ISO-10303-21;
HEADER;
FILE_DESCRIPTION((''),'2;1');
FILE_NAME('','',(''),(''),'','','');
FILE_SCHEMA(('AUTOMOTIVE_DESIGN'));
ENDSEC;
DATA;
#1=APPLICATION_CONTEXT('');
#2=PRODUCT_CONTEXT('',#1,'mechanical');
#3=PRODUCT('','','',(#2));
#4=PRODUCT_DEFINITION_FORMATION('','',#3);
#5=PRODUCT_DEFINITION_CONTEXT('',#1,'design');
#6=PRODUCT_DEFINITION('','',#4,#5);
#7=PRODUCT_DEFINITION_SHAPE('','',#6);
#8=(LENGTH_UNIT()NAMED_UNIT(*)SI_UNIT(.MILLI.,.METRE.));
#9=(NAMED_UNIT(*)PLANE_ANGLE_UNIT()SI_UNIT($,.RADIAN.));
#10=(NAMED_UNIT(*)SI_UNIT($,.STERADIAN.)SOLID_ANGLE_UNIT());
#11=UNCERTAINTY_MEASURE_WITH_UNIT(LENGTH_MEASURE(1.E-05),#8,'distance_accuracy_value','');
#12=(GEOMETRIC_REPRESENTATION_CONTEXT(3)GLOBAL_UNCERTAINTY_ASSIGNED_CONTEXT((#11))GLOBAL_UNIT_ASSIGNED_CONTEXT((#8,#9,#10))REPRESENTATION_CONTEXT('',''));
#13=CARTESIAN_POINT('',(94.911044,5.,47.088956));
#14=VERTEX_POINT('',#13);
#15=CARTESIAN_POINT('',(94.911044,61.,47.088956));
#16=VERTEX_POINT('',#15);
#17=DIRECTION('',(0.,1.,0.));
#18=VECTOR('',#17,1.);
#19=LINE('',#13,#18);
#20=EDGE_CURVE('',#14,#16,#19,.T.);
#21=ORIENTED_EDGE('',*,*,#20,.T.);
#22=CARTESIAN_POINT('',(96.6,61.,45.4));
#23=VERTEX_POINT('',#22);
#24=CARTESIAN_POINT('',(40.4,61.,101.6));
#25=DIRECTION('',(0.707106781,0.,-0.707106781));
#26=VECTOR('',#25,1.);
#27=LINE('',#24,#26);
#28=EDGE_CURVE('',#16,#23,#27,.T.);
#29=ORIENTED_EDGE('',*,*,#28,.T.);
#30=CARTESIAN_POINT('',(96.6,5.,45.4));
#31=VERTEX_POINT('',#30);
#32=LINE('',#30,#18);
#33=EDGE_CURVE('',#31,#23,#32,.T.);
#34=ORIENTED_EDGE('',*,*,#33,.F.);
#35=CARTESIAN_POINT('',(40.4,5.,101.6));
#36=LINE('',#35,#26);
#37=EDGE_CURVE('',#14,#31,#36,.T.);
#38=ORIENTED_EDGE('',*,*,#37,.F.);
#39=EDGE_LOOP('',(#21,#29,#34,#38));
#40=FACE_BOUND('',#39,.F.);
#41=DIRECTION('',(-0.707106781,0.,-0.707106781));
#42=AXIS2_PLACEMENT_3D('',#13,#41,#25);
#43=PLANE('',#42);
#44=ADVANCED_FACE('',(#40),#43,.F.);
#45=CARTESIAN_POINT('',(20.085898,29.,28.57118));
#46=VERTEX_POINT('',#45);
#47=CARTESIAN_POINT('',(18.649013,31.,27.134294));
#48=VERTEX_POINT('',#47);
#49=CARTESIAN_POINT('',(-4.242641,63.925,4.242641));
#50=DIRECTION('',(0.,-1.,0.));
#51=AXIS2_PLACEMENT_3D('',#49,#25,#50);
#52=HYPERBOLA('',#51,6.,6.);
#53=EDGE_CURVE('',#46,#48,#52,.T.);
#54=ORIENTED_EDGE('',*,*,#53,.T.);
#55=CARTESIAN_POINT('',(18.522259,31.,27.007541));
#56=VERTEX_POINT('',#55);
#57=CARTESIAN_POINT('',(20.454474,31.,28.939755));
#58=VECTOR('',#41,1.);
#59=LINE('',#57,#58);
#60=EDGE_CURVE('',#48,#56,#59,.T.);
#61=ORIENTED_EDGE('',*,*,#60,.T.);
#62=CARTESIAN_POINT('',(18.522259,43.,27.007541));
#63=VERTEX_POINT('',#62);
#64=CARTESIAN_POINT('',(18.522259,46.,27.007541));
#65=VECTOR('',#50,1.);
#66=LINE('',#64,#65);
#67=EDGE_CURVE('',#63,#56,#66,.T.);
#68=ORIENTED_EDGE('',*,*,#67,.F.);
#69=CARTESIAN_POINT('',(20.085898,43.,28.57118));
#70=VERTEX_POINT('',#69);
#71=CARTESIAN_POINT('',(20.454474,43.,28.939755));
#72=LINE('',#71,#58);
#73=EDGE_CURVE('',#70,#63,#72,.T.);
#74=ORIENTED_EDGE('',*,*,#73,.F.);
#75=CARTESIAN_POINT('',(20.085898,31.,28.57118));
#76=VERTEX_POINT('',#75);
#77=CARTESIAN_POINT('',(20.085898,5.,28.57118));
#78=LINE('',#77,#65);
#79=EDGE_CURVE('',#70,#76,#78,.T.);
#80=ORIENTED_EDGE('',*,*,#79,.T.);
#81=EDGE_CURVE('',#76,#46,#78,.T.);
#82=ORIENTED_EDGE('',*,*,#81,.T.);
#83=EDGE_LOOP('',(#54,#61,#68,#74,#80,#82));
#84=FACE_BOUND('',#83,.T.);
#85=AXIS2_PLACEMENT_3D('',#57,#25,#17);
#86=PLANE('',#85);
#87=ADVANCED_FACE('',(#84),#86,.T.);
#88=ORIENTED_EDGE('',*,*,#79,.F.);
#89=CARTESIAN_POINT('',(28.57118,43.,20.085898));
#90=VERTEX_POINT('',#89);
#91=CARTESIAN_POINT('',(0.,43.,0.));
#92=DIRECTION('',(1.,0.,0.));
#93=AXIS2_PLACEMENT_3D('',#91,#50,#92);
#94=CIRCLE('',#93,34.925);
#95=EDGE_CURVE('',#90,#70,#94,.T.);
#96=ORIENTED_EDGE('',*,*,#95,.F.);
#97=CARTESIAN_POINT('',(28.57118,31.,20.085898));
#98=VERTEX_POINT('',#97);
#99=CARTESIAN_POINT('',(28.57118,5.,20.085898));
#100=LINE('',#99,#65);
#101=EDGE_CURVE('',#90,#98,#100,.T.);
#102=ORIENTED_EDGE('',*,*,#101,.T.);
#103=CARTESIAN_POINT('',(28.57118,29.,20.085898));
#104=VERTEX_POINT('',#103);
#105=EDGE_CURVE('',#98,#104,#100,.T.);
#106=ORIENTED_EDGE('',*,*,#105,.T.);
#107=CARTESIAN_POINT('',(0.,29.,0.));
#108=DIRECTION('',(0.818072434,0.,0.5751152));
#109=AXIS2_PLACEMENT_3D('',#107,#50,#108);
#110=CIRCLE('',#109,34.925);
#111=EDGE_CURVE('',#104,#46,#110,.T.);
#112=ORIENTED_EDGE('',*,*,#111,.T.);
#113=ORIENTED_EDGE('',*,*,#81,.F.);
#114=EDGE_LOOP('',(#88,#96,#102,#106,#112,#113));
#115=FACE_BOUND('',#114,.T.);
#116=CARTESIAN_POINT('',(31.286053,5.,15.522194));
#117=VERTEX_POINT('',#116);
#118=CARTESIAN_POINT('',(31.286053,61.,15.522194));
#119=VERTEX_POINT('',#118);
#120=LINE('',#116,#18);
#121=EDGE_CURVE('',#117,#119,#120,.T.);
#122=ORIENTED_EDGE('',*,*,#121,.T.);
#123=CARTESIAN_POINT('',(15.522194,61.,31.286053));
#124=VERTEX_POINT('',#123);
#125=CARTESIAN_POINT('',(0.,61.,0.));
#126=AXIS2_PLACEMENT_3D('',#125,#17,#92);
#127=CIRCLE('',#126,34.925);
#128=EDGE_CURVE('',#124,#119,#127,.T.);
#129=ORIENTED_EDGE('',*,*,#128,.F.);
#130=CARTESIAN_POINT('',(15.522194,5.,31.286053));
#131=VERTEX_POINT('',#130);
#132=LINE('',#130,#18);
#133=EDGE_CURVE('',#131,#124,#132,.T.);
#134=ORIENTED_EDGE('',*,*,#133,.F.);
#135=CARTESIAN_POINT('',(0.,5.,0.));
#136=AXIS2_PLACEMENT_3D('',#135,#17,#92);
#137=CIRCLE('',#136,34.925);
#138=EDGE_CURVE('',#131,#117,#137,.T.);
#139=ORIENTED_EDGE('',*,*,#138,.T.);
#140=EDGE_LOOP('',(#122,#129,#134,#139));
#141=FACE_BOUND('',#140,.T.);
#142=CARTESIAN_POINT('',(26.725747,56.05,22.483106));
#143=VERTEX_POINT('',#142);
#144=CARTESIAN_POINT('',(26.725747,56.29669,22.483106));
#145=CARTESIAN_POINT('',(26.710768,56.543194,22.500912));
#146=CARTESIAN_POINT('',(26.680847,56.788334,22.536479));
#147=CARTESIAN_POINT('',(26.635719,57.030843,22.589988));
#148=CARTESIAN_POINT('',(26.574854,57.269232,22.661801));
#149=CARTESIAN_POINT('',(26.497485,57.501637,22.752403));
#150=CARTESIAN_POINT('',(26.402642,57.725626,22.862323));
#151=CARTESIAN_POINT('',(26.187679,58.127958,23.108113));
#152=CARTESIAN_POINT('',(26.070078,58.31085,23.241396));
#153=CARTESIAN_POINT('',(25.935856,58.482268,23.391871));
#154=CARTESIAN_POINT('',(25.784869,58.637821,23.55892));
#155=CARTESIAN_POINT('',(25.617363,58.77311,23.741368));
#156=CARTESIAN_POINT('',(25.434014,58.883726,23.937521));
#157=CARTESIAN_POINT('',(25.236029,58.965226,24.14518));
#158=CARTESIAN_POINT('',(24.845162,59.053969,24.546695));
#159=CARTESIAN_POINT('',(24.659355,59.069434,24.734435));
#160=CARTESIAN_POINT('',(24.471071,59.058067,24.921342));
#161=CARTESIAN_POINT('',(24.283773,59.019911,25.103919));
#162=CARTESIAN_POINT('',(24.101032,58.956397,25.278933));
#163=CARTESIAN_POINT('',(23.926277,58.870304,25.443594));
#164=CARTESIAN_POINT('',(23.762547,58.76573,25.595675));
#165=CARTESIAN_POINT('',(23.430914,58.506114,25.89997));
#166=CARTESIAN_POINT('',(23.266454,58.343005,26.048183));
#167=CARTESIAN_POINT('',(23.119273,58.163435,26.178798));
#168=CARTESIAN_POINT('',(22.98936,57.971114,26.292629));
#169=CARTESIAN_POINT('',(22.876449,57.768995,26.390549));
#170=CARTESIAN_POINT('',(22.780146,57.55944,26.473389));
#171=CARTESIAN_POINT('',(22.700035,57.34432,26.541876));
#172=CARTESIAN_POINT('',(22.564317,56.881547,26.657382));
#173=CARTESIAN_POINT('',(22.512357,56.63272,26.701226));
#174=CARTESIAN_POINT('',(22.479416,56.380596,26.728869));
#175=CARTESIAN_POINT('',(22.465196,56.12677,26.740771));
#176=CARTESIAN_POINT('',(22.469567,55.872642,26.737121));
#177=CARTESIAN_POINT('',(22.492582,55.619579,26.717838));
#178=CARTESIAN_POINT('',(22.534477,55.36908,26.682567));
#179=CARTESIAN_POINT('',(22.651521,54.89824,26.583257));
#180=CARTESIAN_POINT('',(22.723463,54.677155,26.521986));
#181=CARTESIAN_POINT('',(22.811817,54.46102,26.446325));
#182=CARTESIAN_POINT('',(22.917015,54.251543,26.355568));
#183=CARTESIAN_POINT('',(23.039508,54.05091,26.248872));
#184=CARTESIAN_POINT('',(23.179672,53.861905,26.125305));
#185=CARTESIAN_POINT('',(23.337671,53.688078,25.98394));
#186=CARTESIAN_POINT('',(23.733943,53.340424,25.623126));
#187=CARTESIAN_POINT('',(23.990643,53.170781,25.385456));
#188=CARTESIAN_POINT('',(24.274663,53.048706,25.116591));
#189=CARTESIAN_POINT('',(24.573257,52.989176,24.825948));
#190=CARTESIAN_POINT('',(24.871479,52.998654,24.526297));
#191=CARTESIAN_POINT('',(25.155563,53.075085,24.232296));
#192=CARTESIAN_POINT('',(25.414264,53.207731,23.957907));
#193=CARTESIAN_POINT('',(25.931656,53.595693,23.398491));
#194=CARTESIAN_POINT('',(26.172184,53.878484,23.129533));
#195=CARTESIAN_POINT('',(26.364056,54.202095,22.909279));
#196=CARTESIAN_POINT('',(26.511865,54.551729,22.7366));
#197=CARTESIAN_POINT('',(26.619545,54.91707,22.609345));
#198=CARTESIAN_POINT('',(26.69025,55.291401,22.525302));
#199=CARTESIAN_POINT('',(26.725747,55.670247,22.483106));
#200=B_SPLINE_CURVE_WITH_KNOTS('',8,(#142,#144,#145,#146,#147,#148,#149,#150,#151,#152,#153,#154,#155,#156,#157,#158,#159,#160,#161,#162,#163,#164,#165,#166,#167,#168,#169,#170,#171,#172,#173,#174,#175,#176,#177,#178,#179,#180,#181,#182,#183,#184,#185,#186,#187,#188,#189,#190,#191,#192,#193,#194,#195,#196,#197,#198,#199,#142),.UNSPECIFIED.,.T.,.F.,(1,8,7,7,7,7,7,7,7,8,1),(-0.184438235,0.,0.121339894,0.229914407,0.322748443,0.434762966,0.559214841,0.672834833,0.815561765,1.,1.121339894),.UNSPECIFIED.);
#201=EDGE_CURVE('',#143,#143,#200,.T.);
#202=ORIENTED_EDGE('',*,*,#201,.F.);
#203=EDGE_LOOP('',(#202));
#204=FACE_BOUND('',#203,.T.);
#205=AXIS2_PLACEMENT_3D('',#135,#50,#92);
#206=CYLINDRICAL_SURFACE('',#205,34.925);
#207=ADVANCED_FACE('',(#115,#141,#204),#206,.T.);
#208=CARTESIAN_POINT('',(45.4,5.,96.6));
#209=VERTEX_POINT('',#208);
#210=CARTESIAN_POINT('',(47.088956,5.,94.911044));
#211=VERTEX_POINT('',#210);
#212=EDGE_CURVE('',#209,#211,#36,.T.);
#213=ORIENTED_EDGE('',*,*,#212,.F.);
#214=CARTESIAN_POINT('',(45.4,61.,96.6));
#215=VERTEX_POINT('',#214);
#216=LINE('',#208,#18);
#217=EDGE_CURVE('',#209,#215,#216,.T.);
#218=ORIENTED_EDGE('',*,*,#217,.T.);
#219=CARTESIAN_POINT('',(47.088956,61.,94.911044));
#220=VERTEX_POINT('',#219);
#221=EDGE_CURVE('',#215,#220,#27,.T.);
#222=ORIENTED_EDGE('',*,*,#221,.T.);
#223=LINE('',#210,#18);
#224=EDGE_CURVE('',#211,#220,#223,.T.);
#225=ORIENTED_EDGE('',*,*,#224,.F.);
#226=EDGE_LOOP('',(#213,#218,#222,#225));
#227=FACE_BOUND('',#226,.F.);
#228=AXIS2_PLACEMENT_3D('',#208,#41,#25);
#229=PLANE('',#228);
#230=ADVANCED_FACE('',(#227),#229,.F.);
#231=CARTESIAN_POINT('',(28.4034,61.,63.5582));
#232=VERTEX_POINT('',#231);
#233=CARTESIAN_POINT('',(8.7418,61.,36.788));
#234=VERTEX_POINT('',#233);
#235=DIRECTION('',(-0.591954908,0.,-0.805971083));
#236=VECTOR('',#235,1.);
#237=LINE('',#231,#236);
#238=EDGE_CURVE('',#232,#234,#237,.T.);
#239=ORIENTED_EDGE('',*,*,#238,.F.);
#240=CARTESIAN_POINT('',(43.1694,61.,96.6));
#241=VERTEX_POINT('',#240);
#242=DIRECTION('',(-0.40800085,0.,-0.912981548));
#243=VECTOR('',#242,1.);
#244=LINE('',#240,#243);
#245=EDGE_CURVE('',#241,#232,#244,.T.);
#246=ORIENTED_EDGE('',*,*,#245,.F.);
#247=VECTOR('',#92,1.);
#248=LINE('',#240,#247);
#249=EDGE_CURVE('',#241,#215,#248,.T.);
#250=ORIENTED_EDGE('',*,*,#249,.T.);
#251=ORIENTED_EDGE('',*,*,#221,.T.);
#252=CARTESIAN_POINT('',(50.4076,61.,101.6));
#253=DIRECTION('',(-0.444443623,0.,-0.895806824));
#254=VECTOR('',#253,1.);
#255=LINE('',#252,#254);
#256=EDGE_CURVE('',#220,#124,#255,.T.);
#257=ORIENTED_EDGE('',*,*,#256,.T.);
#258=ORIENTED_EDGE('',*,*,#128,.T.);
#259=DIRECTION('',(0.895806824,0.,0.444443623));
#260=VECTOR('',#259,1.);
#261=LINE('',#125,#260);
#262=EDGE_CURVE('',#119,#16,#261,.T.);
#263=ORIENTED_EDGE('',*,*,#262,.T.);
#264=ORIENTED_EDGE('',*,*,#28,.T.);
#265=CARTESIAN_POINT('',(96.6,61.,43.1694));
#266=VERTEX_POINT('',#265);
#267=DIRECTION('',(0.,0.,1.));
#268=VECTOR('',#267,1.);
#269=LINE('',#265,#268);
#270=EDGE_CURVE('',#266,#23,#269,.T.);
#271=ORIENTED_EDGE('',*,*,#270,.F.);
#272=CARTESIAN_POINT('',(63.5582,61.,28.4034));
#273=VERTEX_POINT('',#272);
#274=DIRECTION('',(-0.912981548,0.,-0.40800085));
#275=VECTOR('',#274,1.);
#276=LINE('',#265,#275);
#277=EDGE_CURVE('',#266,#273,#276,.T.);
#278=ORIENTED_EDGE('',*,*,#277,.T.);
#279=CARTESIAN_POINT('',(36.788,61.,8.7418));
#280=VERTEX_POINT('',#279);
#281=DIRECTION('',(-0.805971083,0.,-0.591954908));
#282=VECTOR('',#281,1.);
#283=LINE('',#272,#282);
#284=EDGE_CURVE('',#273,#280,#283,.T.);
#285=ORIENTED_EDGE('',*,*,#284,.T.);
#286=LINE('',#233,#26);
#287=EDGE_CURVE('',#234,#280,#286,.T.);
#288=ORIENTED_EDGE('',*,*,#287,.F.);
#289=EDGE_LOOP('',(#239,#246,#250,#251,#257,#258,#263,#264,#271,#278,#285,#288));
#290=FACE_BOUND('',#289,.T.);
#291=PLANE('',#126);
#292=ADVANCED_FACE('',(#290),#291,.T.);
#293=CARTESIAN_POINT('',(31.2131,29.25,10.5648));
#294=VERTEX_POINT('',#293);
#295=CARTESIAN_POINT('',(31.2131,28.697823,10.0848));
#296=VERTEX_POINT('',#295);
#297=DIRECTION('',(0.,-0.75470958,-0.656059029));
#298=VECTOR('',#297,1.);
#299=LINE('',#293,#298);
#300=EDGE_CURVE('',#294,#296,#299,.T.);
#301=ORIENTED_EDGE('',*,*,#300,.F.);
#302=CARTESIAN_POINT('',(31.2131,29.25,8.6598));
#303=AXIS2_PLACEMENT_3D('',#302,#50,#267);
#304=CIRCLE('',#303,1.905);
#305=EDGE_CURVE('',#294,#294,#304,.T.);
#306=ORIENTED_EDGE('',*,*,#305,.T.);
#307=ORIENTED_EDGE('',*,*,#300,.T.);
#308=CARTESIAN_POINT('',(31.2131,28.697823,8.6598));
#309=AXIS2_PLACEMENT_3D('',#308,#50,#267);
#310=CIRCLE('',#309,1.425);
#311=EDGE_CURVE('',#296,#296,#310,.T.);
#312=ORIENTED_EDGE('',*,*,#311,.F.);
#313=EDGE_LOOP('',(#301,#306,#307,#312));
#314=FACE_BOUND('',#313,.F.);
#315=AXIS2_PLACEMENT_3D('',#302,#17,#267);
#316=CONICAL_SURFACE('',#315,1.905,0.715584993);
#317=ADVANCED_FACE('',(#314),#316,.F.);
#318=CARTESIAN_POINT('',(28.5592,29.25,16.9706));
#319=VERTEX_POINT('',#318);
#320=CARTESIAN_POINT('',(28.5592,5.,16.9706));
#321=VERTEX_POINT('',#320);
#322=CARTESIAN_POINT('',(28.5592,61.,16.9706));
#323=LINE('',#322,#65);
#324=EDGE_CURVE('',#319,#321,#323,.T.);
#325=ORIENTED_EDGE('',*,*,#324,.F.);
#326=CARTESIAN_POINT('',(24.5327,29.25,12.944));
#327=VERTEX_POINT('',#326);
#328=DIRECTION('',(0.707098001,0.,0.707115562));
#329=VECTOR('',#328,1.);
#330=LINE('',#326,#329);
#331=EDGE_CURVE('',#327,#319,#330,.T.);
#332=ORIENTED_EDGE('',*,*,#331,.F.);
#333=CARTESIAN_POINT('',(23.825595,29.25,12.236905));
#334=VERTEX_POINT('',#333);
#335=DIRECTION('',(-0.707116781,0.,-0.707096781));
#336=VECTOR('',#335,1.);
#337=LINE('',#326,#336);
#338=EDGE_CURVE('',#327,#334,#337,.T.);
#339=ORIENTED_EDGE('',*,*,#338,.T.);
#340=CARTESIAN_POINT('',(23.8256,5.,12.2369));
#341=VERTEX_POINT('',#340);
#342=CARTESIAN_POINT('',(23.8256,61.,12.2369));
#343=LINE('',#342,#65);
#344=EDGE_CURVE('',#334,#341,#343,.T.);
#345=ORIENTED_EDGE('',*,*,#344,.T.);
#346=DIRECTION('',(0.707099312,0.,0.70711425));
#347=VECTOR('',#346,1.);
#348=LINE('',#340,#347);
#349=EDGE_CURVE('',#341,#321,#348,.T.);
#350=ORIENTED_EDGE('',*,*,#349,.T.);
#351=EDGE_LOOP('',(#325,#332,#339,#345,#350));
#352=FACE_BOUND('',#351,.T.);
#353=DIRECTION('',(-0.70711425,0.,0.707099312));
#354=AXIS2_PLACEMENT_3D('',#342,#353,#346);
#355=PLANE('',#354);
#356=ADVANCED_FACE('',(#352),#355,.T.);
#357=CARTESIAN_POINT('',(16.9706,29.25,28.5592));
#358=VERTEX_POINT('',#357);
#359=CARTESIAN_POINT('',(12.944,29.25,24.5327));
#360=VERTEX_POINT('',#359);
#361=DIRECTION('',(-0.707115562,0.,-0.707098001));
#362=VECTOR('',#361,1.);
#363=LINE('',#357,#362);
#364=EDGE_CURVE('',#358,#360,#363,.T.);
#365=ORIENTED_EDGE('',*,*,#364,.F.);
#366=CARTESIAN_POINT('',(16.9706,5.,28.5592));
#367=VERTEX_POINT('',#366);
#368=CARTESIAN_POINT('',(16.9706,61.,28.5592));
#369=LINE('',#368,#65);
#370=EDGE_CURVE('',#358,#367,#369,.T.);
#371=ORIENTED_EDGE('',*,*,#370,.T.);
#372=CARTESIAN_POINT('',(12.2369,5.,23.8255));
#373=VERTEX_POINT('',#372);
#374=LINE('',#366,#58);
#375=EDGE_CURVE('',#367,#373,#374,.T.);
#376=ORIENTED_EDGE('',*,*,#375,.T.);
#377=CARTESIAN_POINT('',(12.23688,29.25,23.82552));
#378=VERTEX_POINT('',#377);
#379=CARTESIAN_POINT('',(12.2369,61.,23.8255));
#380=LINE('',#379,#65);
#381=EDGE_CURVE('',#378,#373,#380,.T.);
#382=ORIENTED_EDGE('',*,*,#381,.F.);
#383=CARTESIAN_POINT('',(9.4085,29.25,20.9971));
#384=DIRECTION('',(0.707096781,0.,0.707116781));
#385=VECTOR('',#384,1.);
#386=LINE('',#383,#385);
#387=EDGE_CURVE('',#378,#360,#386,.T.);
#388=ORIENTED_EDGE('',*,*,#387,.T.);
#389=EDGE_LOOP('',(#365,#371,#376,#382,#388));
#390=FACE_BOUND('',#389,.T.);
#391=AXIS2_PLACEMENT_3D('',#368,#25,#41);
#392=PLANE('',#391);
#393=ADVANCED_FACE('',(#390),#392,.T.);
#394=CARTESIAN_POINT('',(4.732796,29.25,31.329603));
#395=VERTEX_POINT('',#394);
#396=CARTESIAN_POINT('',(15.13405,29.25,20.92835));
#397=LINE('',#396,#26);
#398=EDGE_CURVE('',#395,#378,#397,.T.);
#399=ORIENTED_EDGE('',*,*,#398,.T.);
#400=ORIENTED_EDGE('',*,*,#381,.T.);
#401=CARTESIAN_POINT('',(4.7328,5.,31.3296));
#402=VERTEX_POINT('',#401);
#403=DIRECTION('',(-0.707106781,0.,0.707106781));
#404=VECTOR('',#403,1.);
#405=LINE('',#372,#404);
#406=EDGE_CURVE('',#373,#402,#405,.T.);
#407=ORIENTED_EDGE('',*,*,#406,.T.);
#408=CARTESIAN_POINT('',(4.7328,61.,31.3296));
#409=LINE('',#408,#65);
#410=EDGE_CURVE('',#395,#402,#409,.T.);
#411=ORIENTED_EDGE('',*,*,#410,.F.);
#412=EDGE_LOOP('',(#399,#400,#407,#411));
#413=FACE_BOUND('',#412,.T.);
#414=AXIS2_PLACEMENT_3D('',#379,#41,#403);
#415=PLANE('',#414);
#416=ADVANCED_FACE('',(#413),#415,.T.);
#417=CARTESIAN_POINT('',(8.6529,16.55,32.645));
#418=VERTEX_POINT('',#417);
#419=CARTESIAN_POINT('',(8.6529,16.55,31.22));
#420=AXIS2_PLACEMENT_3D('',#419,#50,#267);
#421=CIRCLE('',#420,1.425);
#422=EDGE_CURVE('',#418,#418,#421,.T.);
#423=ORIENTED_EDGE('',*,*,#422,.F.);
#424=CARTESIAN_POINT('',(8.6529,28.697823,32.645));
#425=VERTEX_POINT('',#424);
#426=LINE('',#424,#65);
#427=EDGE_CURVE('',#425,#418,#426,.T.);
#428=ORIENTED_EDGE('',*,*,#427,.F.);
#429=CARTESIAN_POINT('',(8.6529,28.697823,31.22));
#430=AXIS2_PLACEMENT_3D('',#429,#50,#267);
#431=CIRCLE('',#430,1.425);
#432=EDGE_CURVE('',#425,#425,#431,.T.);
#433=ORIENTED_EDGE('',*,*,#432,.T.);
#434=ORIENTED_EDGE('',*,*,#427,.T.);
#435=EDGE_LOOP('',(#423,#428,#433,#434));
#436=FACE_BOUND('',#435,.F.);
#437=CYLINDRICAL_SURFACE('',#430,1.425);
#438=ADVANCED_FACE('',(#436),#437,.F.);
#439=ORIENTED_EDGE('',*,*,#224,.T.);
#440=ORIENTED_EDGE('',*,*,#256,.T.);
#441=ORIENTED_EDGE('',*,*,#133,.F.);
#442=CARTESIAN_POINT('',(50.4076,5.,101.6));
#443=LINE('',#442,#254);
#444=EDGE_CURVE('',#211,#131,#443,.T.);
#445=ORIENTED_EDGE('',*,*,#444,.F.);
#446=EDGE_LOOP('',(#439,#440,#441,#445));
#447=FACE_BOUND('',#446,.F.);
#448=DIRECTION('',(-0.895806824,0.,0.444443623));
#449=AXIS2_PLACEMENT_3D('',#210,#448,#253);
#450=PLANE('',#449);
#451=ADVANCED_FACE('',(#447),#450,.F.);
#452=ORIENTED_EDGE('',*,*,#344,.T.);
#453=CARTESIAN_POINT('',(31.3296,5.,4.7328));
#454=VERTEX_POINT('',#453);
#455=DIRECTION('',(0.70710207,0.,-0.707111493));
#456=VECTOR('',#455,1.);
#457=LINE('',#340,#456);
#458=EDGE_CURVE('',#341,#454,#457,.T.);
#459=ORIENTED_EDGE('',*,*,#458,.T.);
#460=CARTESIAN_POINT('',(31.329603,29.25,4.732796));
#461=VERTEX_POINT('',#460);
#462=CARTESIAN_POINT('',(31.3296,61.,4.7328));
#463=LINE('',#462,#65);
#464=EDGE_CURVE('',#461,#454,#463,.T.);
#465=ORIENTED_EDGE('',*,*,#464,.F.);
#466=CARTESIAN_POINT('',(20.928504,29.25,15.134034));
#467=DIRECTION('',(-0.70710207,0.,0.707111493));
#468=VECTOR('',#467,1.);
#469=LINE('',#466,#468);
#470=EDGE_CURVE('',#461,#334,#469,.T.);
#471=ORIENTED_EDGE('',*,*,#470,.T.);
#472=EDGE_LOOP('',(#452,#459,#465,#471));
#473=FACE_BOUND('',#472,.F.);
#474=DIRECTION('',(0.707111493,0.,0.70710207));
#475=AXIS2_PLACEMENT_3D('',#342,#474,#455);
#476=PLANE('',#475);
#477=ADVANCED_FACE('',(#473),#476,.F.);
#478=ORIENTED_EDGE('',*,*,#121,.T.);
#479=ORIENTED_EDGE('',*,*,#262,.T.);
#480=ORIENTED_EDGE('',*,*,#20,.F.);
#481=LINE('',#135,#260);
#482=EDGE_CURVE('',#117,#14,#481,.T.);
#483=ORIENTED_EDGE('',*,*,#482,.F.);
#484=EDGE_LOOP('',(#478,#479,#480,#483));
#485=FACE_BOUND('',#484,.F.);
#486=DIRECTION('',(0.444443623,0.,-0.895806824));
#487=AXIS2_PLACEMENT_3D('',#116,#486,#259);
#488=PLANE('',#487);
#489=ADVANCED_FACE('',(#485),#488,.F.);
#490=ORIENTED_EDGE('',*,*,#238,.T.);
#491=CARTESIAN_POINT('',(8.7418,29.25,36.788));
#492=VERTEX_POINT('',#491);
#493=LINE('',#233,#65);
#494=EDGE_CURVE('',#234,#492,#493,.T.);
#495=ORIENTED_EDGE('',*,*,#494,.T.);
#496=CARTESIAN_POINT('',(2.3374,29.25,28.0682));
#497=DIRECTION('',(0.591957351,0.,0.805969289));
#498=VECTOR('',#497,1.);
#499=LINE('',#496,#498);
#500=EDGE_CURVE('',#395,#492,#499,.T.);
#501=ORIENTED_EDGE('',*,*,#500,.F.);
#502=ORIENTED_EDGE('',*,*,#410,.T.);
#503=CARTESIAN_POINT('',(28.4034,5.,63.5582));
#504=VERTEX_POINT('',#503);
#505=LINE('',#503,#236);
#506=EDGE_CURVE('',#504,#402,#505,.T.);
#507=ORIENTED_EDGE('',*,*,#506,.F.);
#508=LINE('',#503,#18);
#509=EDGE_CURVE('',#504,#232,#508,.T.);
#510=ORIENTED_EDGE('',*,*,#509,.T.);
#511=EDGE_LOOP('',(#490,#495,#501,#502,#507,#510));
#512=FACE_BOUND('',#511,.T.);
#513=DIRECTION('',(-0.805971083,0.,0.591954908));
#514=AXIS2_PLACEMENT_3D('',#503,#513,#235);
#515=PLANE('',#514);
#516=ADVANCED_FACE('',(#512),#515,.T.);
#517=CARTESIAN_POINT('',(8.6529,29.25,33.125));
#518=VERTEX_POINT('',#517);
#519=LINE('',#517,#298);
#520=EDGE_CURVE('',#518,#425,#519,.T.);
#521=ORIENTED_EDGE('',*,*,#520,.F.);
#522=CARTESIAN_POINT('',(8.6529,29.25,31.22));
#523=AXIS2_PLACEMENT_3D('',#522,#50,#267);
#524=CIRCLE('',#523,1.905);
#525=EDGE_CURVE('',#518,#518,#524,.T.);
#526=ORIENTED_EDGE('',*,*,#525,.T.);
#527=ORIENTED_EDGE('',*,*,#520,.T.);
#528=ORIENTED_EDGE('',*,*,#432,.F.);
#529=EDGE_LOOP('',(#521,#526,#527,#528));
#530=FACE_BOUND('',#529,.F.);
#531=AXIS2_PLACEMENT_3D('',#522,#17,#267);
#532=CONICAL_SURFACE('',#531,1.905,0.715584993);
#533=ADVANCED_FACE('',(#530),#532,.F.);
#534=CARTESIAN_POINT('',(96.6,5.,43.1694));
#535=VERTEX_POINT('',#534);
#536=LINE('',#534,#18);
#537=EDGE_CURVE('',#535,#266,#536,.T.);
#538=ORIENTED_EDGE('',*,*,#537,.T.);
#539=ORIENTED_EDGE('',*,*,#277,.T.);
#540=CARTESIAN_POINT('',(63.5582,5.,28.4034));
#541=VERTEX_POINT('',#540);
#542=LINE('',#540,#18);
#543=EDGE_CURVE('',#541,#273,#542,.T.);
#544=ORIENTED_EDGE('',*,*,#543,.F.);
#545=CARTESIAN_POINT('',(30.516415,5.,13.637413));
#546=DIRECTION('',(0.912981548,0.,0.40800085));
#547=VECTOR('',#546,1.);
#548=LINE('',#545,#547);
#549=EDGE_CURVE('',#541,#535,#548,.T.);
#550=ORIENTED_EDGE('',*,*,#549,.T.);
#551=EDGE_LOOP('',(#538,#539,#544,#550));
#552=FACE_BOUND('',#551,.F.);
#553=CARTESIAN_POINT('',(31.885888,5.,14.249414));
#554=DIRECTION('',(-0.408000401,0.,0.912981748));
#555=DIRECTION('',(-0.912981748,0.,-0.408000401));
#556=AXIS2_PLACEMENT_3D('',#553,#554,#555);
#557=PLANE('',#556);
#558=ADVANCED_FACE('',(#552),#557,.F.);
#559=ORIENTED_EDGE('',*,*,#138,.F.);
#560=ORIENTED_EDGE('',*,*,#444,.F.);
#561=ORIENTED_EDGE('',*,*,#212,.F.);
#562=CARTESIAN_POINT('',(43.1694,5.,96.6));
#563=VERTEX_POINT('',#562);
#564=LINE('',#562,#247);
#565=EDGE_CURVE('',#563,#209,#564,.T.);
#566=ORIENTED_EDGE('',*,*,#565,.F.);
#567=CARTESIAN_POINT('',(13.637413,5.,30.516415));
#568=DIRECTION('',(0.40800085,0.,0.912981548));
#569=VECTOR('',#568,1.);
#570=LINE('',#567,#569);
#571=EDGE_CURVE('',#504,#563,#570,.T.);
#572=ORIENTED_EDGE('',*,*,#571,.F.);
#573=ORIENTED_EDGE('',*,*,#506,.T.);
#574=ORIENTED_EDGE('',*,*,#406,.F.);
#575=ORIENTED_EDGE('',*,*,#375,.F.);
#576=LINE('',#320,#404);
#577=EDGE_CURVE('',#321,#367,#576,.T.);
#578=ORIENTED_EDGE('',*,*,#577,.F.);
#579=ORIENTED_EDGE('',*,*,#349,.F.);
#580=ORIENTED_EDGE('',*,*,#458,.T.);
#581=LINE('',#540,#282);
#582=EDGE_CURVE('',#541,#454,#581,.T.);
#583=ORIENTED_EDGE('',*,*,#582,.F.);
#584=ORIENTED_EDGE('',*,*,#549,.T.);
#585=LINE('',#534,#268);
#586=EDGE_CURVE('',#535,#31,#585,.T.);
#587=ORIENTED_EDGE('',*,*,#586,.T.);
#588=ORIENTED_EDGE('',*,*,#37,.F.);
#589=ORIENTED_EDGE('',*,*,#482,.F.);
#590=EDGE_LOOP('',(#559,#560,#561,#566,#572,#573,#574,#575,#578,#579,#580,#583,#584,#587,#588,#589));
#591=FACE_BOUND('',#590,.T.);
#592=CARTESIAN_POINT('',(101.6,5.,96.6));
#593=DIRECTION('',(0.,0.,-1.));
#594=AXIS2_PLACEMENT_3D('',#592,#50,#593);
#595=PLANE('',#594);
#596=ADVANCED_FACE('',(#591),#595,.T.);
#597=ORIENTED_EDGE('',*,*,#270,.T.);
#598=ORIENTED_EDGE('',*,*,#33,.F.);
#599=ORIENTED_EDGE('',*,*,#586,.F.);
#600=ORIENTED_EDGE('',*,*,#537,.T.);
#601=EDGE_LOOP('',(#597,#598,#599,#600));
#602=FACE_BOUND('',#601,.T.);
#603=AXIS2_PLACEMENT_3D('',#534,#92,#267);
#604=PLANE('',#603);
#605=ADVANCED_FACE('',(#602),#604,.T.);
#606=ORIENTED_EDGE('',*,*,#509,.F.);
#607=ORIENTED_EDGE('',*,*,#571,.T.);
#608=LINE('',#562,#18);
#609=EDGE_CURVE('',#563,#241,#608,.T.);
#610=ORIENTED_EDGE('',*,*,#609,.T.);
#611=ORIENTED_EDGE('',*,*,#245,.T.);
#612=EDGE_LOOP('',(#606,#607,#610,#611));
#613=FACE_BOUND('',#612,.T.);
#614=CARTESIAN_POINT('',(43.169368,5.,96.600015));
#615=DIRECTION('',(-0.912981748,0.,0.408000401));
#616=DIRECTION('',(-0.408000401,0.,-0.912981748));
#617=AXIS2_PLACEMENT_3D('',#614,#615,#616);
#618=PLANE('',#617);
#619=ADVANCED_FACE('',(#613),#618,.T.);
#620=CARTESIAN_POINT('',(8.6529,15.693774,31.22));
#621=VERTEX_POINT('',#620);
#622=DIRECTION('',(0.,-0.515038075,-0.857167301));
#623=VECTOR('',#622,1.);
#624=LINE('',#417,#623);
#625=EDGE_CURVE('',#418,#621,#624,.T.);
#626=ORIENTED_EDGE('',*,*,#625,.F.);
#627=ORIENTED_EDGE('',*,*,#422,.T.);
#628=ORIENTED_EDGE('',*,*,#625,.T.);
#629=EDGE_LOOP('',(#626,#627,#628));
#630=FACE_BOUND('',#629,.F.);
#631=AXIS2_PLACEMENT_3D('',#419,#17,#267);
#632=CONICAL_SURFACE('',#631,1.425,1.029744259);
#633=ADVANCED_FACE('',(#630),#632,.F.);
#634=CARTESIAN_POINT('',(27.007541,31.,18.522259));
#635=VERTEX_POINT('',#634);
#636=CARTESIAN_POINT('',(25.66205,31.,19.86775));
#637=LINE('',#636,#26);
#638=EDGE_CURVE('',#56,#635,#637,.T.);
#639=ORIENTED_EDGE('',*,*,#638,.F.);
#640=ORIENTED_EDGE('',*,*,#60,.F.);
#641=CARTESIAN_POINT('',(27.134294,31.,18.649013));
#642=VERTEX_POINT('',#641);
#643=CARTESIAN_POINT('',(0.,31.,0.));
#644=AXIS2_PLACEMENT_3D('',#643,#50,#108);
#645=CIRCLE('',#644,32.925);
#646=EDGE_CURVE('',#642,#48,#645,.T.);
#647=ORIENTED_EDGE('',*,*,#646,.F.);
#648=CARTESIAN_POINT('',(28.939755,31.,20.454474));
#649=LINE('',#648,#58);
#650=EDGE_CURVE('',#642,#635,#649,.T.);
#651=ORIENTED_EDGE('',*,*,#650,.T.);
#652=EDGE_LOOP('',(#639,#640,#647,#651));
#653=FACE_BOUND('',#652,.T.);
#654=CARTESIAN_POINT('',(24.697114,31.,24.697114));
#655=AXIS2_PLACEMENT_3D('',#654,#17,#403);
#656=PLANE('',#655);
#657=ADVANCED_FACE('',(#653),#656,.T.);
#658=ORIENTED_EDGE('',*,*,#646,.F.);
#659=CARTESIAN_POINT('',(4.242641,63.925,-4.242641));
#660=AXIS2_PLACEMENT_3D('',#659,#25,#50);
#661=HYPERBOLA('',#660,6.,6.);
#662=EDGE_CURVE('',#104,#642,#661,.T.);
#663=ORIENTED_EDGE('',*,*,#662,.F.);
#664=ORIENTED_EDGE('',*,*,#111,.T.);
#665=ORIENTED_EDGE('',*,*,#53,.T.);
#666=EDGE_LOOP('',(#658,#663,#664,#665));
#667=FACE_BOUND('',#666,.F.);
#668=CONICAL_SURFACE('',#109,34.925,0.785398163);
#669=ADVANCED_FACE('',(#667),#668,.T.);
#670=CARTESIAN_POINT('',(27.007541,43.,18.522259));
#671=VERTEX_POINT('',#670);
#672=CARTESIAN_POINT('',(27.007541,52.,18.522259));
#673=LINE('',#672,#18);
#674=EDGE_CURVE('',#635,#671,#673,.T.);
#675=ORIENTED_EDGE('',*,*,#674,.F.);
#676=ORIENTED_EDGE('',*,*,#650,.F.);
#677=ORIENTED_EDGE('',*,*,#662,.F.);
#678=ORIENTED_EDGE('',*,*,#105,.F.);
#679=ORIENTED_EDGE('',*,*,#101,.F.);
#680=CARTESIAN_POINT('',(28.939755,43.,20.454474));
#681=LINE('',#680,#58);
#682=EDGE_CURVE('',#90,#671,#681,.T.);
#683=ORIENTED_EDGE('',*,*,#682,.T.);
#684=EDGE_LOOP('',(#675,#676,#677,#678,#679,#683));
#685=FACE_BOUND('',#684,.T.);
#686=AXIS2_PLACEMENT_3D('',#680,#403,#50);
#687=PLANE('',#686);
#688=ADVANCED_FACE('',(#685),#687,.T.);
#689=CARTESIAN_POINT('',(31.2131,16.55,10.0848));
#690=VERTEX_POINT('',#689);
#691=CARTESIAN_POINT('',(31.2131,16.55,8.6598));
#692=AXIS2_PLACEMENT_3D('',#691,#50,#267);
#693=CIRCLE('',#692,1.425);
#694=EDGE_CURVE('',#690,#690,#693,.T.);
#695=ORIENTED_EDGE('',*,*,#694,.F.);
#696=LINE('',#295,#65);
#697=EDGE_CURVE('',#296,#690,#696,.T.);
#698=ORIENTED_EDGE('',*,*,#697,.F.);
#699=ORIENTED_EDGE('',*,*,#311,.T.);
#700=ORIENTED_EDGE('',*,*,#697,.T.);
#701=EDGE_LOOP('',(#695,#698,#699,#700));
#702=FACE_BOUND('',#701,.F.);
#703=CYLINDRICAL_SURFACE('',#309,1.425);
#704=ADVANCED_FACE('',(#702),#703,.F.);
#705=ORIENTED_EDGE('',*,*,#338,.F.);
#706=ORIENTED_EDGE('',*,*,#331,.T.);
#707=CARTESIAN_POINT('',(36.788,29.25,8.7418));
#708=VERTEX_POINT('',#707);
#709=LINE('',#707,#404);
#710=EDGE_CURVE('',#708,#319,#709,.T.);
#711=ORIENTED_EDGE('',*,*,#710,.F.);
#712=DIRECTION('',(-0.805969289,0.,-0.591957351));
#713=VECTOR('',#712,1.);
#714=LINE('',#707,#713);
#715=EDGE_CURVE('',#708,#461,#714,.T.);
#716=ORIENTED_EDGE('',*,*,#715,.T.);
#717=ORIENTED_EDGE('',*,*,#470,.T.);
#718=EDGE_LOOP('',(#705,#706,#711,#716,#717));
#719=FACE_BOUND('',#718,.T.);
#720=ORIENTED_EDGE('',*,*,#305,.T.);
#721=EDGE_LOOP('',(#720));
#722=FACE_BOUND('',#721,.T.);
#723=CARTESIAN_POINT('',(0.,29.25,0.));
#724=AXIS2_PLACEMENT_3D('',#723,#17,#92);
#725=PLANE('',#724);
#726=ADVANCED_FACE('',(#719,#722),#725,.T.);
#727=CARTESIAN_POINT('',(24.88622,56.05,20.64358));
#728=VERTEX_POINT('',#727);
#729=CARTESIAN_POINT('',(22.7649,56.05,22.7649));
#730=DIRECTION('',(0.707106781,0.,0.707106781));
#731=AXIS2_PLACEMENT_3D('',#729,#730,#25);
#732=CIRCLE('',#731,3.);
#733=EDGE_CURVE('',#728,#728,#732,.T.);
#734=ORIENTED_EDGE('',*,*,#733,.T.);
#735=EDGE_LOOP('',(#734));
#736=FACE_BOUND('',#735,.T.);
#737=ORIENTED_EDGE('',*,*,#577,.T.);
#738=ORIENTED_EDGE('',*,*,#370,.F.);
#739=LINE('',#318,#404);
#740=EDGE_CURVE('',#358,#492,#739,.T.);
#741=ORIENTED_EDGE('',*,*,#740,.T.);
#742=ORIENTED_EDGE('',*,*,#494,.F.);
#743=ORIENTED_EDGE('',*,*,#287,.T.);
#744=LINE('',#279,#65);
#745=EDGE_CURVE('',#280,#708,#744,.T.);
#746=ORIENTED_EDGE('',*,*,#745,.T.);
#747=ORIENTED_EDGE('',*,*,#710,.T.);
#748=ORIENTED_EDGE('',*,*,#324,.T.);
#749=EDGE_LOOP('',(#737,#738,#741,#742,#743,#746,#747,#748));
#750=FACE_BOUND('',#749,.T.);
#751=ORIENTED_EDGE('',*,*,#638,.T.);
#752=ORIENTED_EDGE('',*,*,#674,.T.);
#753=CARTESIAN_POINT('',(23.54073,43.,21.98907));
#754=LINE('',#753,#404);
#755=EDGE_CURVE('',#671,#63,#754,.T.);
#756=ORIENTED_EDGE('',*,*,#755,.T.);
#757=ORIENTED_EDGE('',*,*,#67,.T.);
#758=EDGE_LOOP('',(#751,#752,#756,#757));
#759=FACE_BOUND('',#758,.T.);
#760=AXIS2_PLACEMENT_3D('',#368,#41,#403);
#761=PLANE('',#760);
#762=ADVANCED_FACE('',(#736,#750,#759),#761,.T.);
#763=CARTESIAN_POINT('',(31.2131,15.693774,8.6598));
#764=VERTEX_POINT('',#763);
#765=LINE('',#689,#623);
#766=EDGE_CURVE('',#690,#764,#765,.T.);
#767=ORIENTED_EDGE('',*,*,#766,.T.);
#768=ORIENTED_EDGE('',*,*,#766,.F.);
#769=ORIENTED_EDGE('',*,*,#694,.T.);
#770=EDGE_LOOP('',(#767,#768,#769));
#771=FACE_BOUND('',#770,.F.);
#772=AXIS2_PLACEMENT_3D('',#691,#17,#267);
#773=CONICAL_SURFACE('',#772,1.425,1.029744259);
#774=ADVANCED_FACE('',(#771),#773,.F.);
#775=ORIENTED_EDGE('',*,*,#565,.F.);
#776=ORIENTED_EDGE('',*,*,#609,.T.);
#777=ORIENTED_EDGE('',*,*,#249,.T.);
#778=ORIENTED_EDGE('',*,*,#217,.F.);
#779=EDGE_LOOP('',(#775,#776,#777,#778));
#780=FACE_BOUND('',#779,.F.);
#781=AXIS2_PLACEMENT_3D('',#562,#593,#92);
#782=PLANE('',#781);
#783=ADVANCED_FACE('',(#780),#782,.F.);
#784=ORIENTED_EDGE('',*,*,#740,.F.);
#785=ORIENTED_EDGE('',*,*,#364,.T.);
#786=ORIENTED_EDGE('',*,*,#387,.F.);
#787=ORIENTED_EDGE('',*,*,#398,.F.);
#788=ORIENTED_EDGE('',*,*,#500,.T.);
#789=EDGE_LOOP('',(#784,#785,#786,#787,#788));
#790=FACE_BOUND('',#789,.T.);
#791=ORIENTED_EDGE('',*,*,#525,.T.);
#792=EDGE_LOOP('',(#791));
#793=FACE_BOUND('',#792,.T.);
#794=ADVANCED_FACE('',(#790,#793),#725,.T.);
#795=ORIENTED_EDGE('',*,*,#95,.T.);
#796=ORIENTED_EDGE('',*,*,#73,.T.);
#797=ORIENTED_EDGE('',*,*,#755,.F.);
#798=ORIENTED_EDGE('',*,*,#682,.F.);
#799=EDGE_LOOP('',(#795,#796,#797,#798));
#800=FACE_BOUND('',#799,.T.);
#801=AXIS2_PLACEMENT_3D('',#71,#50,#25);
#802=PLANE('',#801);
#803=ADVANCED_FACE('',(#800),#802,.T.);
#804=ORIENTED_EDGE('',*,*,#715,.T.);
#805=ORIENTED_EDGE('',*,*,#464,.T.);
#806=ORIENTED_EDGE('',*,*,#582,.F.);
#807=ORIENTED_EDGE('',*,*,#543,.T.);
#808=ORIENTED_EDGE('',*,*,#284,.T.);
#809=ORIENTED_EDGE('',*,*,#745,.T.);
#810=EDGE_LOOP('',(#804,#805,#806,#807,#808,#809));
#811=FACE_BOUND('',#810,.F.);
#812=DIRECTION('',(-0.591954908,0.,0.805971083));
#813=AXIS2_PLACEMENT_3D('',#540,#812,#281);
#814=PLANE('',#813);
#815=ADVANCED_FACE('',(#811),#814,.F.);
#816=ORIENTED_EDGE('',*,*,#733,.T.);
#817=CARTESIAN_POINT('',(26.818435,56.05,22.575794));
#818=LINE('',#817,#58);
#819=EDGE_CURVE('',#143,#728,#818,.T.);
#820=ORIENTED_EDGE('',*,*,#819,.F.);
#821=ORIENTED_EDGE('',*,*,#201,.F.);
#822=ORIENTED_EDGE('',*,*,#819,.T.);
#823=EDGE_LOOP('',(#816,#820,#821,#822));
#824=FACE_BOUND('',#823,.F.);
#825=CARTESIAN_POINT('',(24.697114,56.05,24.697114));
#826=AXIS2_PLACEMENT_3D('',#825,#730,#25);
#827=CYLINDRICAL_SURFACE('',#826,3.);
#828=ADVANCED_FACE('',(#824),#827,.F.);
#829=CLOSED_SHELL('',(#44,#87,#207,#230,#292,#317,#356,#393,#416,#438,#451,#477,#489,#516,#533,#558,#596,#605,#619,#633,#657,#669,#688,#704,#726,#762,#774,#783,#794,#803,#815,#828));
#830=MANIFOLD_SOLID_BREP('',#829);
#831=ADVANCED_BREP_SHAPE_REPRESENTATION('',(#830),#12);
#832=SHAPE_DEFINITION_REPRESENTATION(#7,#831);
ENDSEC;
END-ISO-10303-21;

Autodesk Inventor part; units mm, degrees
ref_plane "YZ Plane" through (0, 0, 0) normal (1, 0, 0) x (0, 1, 0)
ref_plane "XZ Plane" through (0, 0, 0) normal (0, 1, 0) x (-1, 0, 0)
sketch "Sketch1" plane through (0, 0, 0) normal (0, 1, 0) x (-1, 0, 0)
  line L0 (101.6, -101.6) -> (-101.6, -101.6)
  line L1 (-101.6, -101.6) -> (-101.6, 101.6)
  line L2 (-101.6, 101.6) -> (101.6, 101.6)
  line L3 (101.6, 101.6) -> (101.6, -101.6)
  line L4 (96.6, -96.6) -> (-96.6, -96.6)
  line L5 (-96.6, -96.6) -> (-96.6, 96.6)
  line L6 (-96.6, 96.6) -> (96.6, 96.6)
  line L7 (96.6, 96.6) -> (96.6, -96.6)
  line L8 (101.6, 101.6) -> (-40.4, 101.6)
  circle A0 centre (0, 0) radius 88.9
  circle A1 centre (0, 0) radius 109.3376
  line L9 (-40.4, 101.6) -> (-101.6, 40.4)
  line L10 (-45.4, 101.6) -> (-101.6, 45.4)
  line L11 (96.6, 96.6) -> (96.6, 101.6)
  line L12 (-45.4, 101.6) -> (-35.4, 101.6)
  line L13 (-35.4, 101.6) -> (-35.4, 96.6)
  line L14 (-35.4, 96.6) -> (-45.4, 96.6)
  line L15 (-45.4, 96.6) -> (-45.4, 101.6)
  line L16 (-45.4, 101.6) -> (-43.114, 101.6)
  line L17 (-43.114, 101.6) -> (-43.114, 96.6)
  line L18 (-43.114, 96.6) -> (-45.4, 96.6)
  line L19 (-45.4, 96.6) -> (-45.4, 101.6)
  line L20 (-96.6, 45.4) -> (-101.6, 45.4)
  line L21 (-101.6, 45.4) -> (-101.6, 43.114)
  line L22 (-101.6, 43.114) -> (-96.6, 43.114)
  line L23 (-96.6, 43.114) -> (-96.6, 45.4)
  point P0 (96.6, 51.2168)
  point P1 (101.6, 40.4)
  point P2 (101.6, -40.4)
  point P3 (96.6, -51.2168)
  point P4 (-96.6, 45.4)
  point P5 (-45.4, 96.6)
  dimension "d0" = 203.2
  dimension "d1" = 203.2
  dimension "d2" = 101.6
  dimension "d3" = 101.6
  dimension "d4" = 5
  dimension "d5" = 5
  dimension "d6" = 5
  dimension "d7" = 5
  dimension "d10" = 142
  dimension "d12" = 61.2
  dimension "d14" = 177.8
  dimension "d15" = 5
  dimension "d16" = 5
  dimension "d17" = 10
  dimension "d86" = 2.286
  dimension "d87" = 2.286
extrude "Extrusion1" add sketch "Sketch1" along normal blind 5 contours L0 A1 L4 L7 L3 | L0 A1 L4 | A1 L7 L3 | L0 L1 A1 L5 L4 | A1 L7 L4 | L4 A1 L5 L9 L6 L7 | A1 L7 L11 L2 L3 | L4 L5 A1 | A1 L6 L7 | L1 L9 L22 L5 A1 | L11 L6 A1 L2 | L6 L13 L2 A1 | L1 L22 A1 | A1 L22 L9 | L22 L9 L5 | L6 L17 L9 L2 L13 | L1 L20 A1 L22 | A1 L20 L9 L22 | L20 A1 L10 L5 | L5 L10 L6 L9 | A1 L17 L2 | L9 L17 A1 | L6 L9 L17 | L1 L2 L10 A1 L6 L5 | L10 A1 L20 | L10 A1 L5 | L5 A1 L6 L10 | L15 A1 L17 L9 | L6 L10 A1 L15 | L17 A1 L15 L2 | L5 L6 A1 | L6 A1 L10 | A1 L10 L15 | A0
sketch "Sketch3" plane through (0, 5, 0) normal (0, 1, 0) x (1, 0, 0)
  circle A0 centre (0, 0) radius 88.9
  line L0 (-101.6, 101.6) -> (-101.6, -101.6) projected
  line L1 (-101.6, -101.6) -> (101.6, -101.6) projected
  line L2 (-101.6, 101.6) -> (101.6, 101.6)
  line L3 (101.6, 101.6) -> (101.6, -101.6)
  line L4 (101.6, -101.6) -> (-101.6, -101.6)
  line L5 (-101.6, -101.6) -> (-101.6, 101.6)
  line L6 (-96.6, 96.6) -> (96.6, 96.6)
  line L7 (96.6, 96.6) -> (96.6, -96.6)
  line L8 (96.6, -96.6) -> (-96.6, -96.6)
  line L9 (-96.6, -96.6) -> (-96.6, 96.6)
  line L10 (-101.6, -101.6) -> (40.4, -101.6)
  circle A1 centre (0, 0) radius 109.3376
  line L11 (40.4, -101.6) -> (101.6, -40.4)
  line L12 (101.6, -101.6) -> (101.6, 101.6) projected
  line L13 (45.4038, -101.6) -> (101.6, -45.4038)
  line L14 (96.6, -45.4) -> (101.6, -45.4038)
  line L15 (45.4, -96.6) -> (45.4038, -101.6)
  line L16 (96.6, -45.4) -> (101.6, -45.4)
  line L17 (101.6, -45.4) -> (101.6, -43.114)
  line L18 (101.6, -43.114) -> (96.6, -43.114)
  line L19 (96.6, -43.114) -> (96.6, -45.4)
  line L20 (45.4038, -101.6) -> (43.1178, -101.6)
  line L21 (43.1178, -101.6) -> (43.1178, -96.6)
  line L22 (43.1178, -96.6) -> (45.4038, -96.6)
  line L23 (45.4038, -96.6) -> (45.4038, -101.6)
  point P0 (45.4038, -101.6)
  point P1 (50.4038, -96.6)
  point P2 (96.6, -50.4038)
  dimension "d28" = 177.8
  dimension "d29" = 5
  dimension "d30" = 5
  dimension "d31" = 5
  dimension "d32" = 5
  dimension "d33" = 142
  dimension "d76" = 5.0038
  dimension "d77" = 5.0038
  dimension "d88" = 2.286
  dimension "d89" = 2.286
extrude "Extrusion3" cut sketch "Sketch3" against normal blind 2 contours L2 A1 L6 L9 L0 | A1 L9 L0 | L2 A1 L6 | A1 L9 L8 L1 L0 | L2 L3 A1 L7 L6 | A1 L8 L21 L11 L1 | L3 L11 L18 L7 A1 | A1 L21 L1 | L11 L21 A1 | L3 L18 A1 | A1 L18 L11
sketch "Sketch4" plane through (0, 5, 0) normal (0, 1, 0) x (1, 0, 0)
  line L0 (101.6, 101.6) -> (-101.6, 101.6)
  line L1 (-101.6, 101.6) -> (-101.6, -101.6)
  line L2 (-101.6, -101.6) -> (101.6, -101.6)
  line L3 (101.6, -101.6) -> (101.6, 101.6)
  circle A0 centre (0, 0) radius 2.5
  line L4 (11.3314, 2.139) -> (-2.139, -11.3314)
  line L5 (0, 0) -> (-5.6569, 5.6569)
  line L6 (-5.6569, -14.8492) -> (-26.163, 5.6569)
  line L7 (-5.6569, 26.163) -> (14.8492, 5.6569)
  circle A1 centre (-5.6569, 5.6569) radius 14
  line L8 (-26.163, 5.6569) -> (-5.6569, 26.163)
  line L9 (14.8492, 5.6569) -> (-5.6569, -14.8492)
  line L10 (-40.3051, 5.6569) -> (-5.6569, 40.3051)
  line L11 (-5.6569, 40.3051) -> (28.9914, 5.6569)
  line L12 (28.9914, 5.6569) -> (-5.6569, -28.9914)
  line L13 (-5.6569, -28.9914) -> (-40.3051, 5.6569)
  line L14 (-22.6451, 9.1747) -> (-9.1747, 22.6451)
  line L15 (-9.1747, 22.6451) -> (-12.7668, 26.2372)
  line L16 (-12.7668, 26.2372) -> (-26.2372, 12.7668)
  line L17 (-26.2372, 12.7668) -> (-22.6451, 9.1747)
  point P0 (9.525, 22.5)
  point P1 (-9.525, -6.5)
  dimension "d37" = 203.2
  dimension "d38" = 203.2
  dimension "d39" = 8
  dimension "d40" = 28
  dimension "d41" = 29
  dimension "d42" = 29
  dimension "d43" = 14.5
  dimension "d44" = 10
  dimension "d45" = 10
  dimension "d46" = 10
  dimension "d47" = 10
  dimension "d48" = 5.08
  dimension "d49" = 9.525
  dimension "d50" = 9.525
  dimension "d55" = 101.6
  dimension "d56" = 101.6
extrude "Extrusion4" cut sketch "Sketch4" against normal blind 1 contours A0 | L4 L9 L6 L8 L7 | L8 L17 L16 L15 | A1 | L10 L11 L12 L13
sketch "Sketch6" plane through (0, 5, 0) normal (0, 1, 0) x (1, 0, 0)
  line L0 (45.4038, -101.6) -> (0, 0)
  line L1 (50.4038, -96.6) -> (45.4038, -101.6) projected
  line L2 (96.6, -43.114) -> (96.6, 96.6) projected
  line L3 (101.6, -101.6) -> (101.6, 101.6) projected
  circle A0 centre (0, 0) radius 34.925
  circle A1 centre (0, 0) radius 33.425
  line L4 (-101.6, 101.6) -> (-101.6, -101.6) projected
  line L5 (-101.6, -101.6) -> (40.4, -101.6)
  line L6 (-101.6, -101.6) -> (101.6, -101.6) projected
  line L7 (101.6, 101.6) -> (101.6, -43.114) projected
  line L8 (101.6, -45.4038) -> (0, 0)
  line L9 (-96.6, -96.6) -> (43.1178, -96.6) projected
  line L10 (96.6, -43.114) -> (96.6, 96.6) projected
  line L11 (43.1178, -101.6) -> (-101.6, -101.6) projected
  line L12 (101.6, -45.4038) -> (96.6, -50.4038) projected
  line L13 (45.4038, -101.6) -> (101.6, -45.4038)
  line L14 (43.1178, -101.6) -> (101.6, -101.6) projected
  line L15 (0, 0) -> (101.6, -50.4076)
  line L16 (50.4076, -101.6) -> (0, 0)
  line L17 (43.1694, -96.6) -> (47.9269, -96.6)
  line L18 (96.6, -43.1694) -> (96.6, -47.9269)
  line L19 (40.4, -101.6) -> (101.6, -40.4)
  point P0 (13.6374, -30.5164)
  point P1 (30.5164, -13.6374)
  point P2 (14.2494, -31.8859)
  point P3 (31.2861, -15.5222)
  point P4 (29.9423, -14.8555)
  point P5 (31.8859, -14.2494)
  point P6 (98.2555, -48.7483)
  point P7 (96.6, -47.9269)
  point P8 (47.9269, -96.6)
  point P9 (15.5222, -31.2861)
  point P10 (96.6, -45.4)
  point P11 (45.4, -96.6)
  point P12 (14.8555, -29.9423)
  point P13 (96.6, -45.4)
  point P14 (45.4, -96.6)
  point P15 (45.4, -96.6)
  point P16 (47.089, -94.911)
  point P17 (94.911, -47.089)
  point P18 (96.6, -45.4)
  point P19 (43.8583, -98.1417)
  point P20 (98.1417, -43.8583)
  point P21 (45.4, -96.6)
  point P22 (96.6, -45.4)
  dimension "d71" = 69.85
  dimension "d72" = 66.85
  dimension "d75" = 142
  dimension "d78" = 5.0038
  dimension "d82" = 5.0038
extrude "Extrusion6" add sketch "Sketch6" along normal blind 56 contours L0 A0 L16 L19 L17 | L0 A1 L16 A0 | L16 A1 L15 A0 | L15 A0 L8 L18 L19 | A0 L15 A1 L8
fillet "Fillet3" radius 12.7 1 edges at (101.6, 2.5, 101.6)
sketch "Sketch9" plane through (0, 4, 0) normal (0, 1, 0) x (1, 0, 0)
  point P0 (0, 0)
sketch "Sketch10" plane through (0, 5, 0) normal (0, 1, 0) x (1, 0, 0)
  point P0 (0, 0)
ref_plane "Work Plane1" through (24.6957, 5, 24.6957) normal (0.7071068, 0, 0.7071068) x (0.7071068, 0, -0.7071068)
sketch "Sketch15" plane through (0, 5, 0) normal (0, 1, 0) x (1, 0, 0)
  line L0 (13.6374, -30.5164) -> (43.1694, -96.6) projected
  line L1 (28.4034, -63.5582) -> (-0.6569, -23.9914)
  line L2 (28.9914, 5.6569) -> (-5.6569, -28.9914) projected
  line L3 (96.6, -43.1694) -> (30.5164, -13.6374) projected
  line L4 (-5.6569, 40.3051) -> (28.9914, 5.6569) projected
  line L5 (63.5582, -28.4034) -> (23.9914, 0.6569)
  line L6 (2.3374, -28.0682) -> (28.0682, -2.3374)
  arc A0 (13.6374, -30.5164) -> (30.5164, -13.6374) centre (0, 0) ccw projected
  line L7 (28.4034, -63.5582) -> (13.6374, -30.5164)
  line L8 (63.5582, -28.4034) -> (30.5164, -13.6374)
  arc A1 (13.6374, -30.5164) -> (30.5164, -13.6374) centre (0, 0) ccw
  dimension "d138" = 5
  dimension "d139" = 5
  dimension "d140" = 5
extrude "Extrusion11" add sketch "Sketch15" along normal up to surface (56 mm away) contours L0 L1 L6 L5 L3 A0
sketch "Sketch16" plane through (0, 61, 0) normal (0, 1, 0) x (1, 0, 0)
  line L0 (2.3374, -28.0682) -> (28.0682, -2.3374) projected
  line L1 (9.4085, -20.9971) -> (12.2369, -23.8255)
  line L2 (12.2369, -23.8255) -> (23.8256, -12.2369)
  line L3 (23.8256, -12.2369) -> (20.9971, -9.4085)
  line L4 (12.2369, -23.8255) -> (23.8256, -12.2369)
  line L5 (23.8256, -12.2369) -> (28.5592, -16.9706)
  line L6 (28.5592, -16.9706) -> (16.9706, -28.5592)
  line L7 (16.9706, -28.5592) -> (12.2369, -23.8255)
  line L8 (28.4034, -63.5582) -> (2.3374, -28.0682) projected
  line L9 (28.0682, -2.3374) -> (63.5582, -28.4034) projected
  line L10 (23.8256, -12.2369) -> (31.3296, -4.7328)
  line L11 (12.2369, -23.8255) -> (4.7328, -31.3296)
  line L12 (28.4034, -63.5582) -> (2.3374, -28.0682) projected
  point P0 (0, 0)
  point P1 (29.3133, -3.2519)
  point P2 (12.2369, -23.8255)
  dimension "d144" = 10
  dimension "d145" = 10
  dimension "d146" = 4
  dimension "d152" = 0
  dimension "d153" = 0
extrude "Extrusion12" cut sketch "Sketch16" against normal up to surface (56 mm away)
sketch "Sketch11" plane through (24.6957, 5, 24.6957) normal (0.7071068, 0, 0.7071068) x (0.7071068, 0, -0.7071068)
  line L0 (143.6841, -5) -> (0, -5) projected
  line L1 (0, -5) -> (0, 32)
  circle A0 centre (0, 32) radius 5.5
  line L2 (0, 32) -> (0, 51.05)
  circle A1 centre (0, 51.05) radius 3
  line L3 (-6, 38) -> (6, 38)
  line L4 (6, 38) -> (6, 26)
  line L5 (6, 26) -> (-6, 26)
  line L6 (-6, 26) -> (-6, 38)
  line L7 (0, 48.05) -> (0, 38)
  dimension "d172" = 6
  dimension "d120" = 37
  dimension "d121" = 11
  dimension "d171" = 19.05
  dimension "d221" = 6
  dimension "d222" = 6
  dimension "d223" = 6
  dimension "d224" = 6
extrude "Extrusion8" cut sketch "Sketch11" against normal blind 127
sketch "Sketch18" plane through (101.6, 3, 43.114) normal (1, 0, 0) x (0, 0, -1)
  line L0 (-53.486, 2) -> (-58.486, 2) projected
  line L1 (-58.486, 2) -> (145.4353, 2)
  line L2 (145.4353, 2) -> (145.4353, -4.8825)
  line L3 (145.4353, -4.8825) -> (-58.486, -4.8825)
  line L4 (-58.486, -4.8825) -> (-58.486, 2)
  point P0 (43.114, -3)
extrude "Extrusion13" cut sketch "Sketch18" against normal through all
sketch "Sketch30" plane through (0, 61, 0) normal (0, 1, 0) x (1, 0, 0)
  line L0 (2.3374, -28.0682) -> (28.0682, -2.3374)
  line L1 (9.4085, -20.9971) -> (12.944, -24.5327)
  line L2 (12.944, -24.5327) -> (24.5327, -12.944)
  line L3 (24.5327, -12.944) -> (20.9971, -9.4085)
  line L4 (12.944, -24.5327) -> (24.5327, -12.944)
  line L5 (24.5327, -12.944) -> (28.5592, -16.9706)
  line L6 (28.5592, -16.9706) -> (16.9706, -28.5592)
  line L7 (16.9706, -28.5592) -> (12.944, -24.5327)
  line L8 (12.944, -24.5327) -> (5.3317, -32.145)
  line L9 (28.4034, -63.5582) -> (2.3374, -28.0682)
  line L10 (24.5327, -12.944) -> (32.145, -5.3317)
  line L11 (28.0682, -2.3374) -> (63.5582, -28.4034)
  line L12 (31.3296, -4.7328) -> (63.5582, -28.4034) projected
  line L13 (36.788, -8.7418) -> (28.5592, -16.9706)
  line L14 (28.5592, -16.9706) -> (8.7418, -36.788)
  line L15 (36.788, -8.7418) -> (32.145, -5.3317)
  line L16 (28.4034, -63.5582) -> (4.7328, -31.3296) projected
  line L17 (8.7418, -36.788) -> (5.3317, -32.145)
  point P0 (0, 0)
  point P1 (0, 0)
  point P2 (16.9706, -28.5592)
  dimension "d231" = 10
  dimension "d232" = 10
  dimension "d233" = 5
  dimension "d234" = 0
  dimension "d235" = 0
  dimension "d240" = 0
extrude "Extrusion14" cut sketch "Sketch30" against normal blind 31.75 contours L0 L1 L8 L9 | L0 L11 L10 L3 | L7 L14 L9 L8 | L10 L11 L13 L5
sketch "Sketch32" plane through (28.4034, 5, 63.5582) normal (-0.8059719, 0, 0.5919538) x (0.5919538, 0, 0.8059719)
  line L0 (-33.2148, 56) -> (-33.2148, 24.25) projected
  line L1 (-33.2148, 24.25) -> (-38.2681, 24.25)
  line L2 (-41.5932, 24.25) -> (-34.9759, 24.25) projected
  line L3 (-38.9873, 24.25) -> (-33.2148, 40.125)
  point P0 (-68.0396, -5)
  point P1 (-40.6047, 22.75)
  point P2 (-45.5472, 22.75)
sketch "Sketch33" plane through (0, 29.25, 0) normal (0, 1, 0) x (1, 0, 0)
  circle A0 centre (2, 3.9204) radius 1.5
  circle A1 centre (33.9053, 3.9204) radius 1.5
  line L0 (35.9053, 0) -> (31.9053, 0)
  line L1 (31.9053, 7.8408) -> (35.9053, 7.8408)
  line L2 (35.9053, 7.8408) -> (35.9053, 0)
  line L3 (31.9053, 2) -> (31.9053, 7.8408)
  line L4 (0, 0) -> (0, 7.8408)
  line L5 (0, 7.8408) -> (4, 7.8408)
  circle A2 centre (31.2131, -8.6598) radius 1.5
  circle A3 centre (8.6529, -31.22) radius 1.5
  line L6 (31.3296, -4.7328) -> (36.788, -8.7418) projected
  line L7 (8.7418, -36.788) -> (4.7328, -31.3296) projected
  line L8 (31.2131, -8.6598) -> (8.6529, -31.22)
  line L9 (36.788, -8.7418) -> (8.7418, -36.788) projected
  line L10 (12.2369, -23.8255) -> (16.9706, -28.5592) projected
  line L11 (28.5592, -16.9706) -> (23.8256, -12.2369) projected
  point P0 (36.9053, 0)
  point P1 (32.145, -5.3317)
  point P2 (5.3317, -32.145)
  point P3 (28.0682, -2.3374)
  point P4 (2.3374, -28.0682)
  dimension "d241" = 3
  dimension "d242" = 3
  dimension "d243" = 7.8408
  dimension "d244" = 3.9204
  dimension "d245" = 4
  dimension "d246" = 2
  dimension "d247" = 2
  dimension "d248" = 3.9204
  dimension "d249" = 31.9053
  dimension "d250" = 3
  dimension "d251" = 3
  dimension "d254" = 31.905
  dimension "d264" = 4
  dimension "d269" = 7.7629
  dimension "d270" = 7.7532
hole "Hole3" at (8.6529, 29.25, 31.22) at (31.2131, 29.25, 8.6598) direction (0, -1, 0) diameter 2.85 depth 12.7 tip angle 118 countersink diameter 3.81 countersink angle 82 thread size "M3.5x0.6" class "6H" standard "ANSI Metric M Profile"
chamfer "Chamfer1" distance 2 distance2 2 1 edges at (24.6957, 31, 24.6957) measured on face at (17.0887, 32.3333, 30.4587)
sketch "Sketch34" plane through (0, 61, 0) normal (0, 1, 0) x (1, 0, 0)
  point P0 (0, 0)
equation "\"d1\" = d0"
equation "\"d2\" = 0.5 * d0"
equation "\"d3\" = 0.5 * d0"
properties part number "Box_Walls_2"
